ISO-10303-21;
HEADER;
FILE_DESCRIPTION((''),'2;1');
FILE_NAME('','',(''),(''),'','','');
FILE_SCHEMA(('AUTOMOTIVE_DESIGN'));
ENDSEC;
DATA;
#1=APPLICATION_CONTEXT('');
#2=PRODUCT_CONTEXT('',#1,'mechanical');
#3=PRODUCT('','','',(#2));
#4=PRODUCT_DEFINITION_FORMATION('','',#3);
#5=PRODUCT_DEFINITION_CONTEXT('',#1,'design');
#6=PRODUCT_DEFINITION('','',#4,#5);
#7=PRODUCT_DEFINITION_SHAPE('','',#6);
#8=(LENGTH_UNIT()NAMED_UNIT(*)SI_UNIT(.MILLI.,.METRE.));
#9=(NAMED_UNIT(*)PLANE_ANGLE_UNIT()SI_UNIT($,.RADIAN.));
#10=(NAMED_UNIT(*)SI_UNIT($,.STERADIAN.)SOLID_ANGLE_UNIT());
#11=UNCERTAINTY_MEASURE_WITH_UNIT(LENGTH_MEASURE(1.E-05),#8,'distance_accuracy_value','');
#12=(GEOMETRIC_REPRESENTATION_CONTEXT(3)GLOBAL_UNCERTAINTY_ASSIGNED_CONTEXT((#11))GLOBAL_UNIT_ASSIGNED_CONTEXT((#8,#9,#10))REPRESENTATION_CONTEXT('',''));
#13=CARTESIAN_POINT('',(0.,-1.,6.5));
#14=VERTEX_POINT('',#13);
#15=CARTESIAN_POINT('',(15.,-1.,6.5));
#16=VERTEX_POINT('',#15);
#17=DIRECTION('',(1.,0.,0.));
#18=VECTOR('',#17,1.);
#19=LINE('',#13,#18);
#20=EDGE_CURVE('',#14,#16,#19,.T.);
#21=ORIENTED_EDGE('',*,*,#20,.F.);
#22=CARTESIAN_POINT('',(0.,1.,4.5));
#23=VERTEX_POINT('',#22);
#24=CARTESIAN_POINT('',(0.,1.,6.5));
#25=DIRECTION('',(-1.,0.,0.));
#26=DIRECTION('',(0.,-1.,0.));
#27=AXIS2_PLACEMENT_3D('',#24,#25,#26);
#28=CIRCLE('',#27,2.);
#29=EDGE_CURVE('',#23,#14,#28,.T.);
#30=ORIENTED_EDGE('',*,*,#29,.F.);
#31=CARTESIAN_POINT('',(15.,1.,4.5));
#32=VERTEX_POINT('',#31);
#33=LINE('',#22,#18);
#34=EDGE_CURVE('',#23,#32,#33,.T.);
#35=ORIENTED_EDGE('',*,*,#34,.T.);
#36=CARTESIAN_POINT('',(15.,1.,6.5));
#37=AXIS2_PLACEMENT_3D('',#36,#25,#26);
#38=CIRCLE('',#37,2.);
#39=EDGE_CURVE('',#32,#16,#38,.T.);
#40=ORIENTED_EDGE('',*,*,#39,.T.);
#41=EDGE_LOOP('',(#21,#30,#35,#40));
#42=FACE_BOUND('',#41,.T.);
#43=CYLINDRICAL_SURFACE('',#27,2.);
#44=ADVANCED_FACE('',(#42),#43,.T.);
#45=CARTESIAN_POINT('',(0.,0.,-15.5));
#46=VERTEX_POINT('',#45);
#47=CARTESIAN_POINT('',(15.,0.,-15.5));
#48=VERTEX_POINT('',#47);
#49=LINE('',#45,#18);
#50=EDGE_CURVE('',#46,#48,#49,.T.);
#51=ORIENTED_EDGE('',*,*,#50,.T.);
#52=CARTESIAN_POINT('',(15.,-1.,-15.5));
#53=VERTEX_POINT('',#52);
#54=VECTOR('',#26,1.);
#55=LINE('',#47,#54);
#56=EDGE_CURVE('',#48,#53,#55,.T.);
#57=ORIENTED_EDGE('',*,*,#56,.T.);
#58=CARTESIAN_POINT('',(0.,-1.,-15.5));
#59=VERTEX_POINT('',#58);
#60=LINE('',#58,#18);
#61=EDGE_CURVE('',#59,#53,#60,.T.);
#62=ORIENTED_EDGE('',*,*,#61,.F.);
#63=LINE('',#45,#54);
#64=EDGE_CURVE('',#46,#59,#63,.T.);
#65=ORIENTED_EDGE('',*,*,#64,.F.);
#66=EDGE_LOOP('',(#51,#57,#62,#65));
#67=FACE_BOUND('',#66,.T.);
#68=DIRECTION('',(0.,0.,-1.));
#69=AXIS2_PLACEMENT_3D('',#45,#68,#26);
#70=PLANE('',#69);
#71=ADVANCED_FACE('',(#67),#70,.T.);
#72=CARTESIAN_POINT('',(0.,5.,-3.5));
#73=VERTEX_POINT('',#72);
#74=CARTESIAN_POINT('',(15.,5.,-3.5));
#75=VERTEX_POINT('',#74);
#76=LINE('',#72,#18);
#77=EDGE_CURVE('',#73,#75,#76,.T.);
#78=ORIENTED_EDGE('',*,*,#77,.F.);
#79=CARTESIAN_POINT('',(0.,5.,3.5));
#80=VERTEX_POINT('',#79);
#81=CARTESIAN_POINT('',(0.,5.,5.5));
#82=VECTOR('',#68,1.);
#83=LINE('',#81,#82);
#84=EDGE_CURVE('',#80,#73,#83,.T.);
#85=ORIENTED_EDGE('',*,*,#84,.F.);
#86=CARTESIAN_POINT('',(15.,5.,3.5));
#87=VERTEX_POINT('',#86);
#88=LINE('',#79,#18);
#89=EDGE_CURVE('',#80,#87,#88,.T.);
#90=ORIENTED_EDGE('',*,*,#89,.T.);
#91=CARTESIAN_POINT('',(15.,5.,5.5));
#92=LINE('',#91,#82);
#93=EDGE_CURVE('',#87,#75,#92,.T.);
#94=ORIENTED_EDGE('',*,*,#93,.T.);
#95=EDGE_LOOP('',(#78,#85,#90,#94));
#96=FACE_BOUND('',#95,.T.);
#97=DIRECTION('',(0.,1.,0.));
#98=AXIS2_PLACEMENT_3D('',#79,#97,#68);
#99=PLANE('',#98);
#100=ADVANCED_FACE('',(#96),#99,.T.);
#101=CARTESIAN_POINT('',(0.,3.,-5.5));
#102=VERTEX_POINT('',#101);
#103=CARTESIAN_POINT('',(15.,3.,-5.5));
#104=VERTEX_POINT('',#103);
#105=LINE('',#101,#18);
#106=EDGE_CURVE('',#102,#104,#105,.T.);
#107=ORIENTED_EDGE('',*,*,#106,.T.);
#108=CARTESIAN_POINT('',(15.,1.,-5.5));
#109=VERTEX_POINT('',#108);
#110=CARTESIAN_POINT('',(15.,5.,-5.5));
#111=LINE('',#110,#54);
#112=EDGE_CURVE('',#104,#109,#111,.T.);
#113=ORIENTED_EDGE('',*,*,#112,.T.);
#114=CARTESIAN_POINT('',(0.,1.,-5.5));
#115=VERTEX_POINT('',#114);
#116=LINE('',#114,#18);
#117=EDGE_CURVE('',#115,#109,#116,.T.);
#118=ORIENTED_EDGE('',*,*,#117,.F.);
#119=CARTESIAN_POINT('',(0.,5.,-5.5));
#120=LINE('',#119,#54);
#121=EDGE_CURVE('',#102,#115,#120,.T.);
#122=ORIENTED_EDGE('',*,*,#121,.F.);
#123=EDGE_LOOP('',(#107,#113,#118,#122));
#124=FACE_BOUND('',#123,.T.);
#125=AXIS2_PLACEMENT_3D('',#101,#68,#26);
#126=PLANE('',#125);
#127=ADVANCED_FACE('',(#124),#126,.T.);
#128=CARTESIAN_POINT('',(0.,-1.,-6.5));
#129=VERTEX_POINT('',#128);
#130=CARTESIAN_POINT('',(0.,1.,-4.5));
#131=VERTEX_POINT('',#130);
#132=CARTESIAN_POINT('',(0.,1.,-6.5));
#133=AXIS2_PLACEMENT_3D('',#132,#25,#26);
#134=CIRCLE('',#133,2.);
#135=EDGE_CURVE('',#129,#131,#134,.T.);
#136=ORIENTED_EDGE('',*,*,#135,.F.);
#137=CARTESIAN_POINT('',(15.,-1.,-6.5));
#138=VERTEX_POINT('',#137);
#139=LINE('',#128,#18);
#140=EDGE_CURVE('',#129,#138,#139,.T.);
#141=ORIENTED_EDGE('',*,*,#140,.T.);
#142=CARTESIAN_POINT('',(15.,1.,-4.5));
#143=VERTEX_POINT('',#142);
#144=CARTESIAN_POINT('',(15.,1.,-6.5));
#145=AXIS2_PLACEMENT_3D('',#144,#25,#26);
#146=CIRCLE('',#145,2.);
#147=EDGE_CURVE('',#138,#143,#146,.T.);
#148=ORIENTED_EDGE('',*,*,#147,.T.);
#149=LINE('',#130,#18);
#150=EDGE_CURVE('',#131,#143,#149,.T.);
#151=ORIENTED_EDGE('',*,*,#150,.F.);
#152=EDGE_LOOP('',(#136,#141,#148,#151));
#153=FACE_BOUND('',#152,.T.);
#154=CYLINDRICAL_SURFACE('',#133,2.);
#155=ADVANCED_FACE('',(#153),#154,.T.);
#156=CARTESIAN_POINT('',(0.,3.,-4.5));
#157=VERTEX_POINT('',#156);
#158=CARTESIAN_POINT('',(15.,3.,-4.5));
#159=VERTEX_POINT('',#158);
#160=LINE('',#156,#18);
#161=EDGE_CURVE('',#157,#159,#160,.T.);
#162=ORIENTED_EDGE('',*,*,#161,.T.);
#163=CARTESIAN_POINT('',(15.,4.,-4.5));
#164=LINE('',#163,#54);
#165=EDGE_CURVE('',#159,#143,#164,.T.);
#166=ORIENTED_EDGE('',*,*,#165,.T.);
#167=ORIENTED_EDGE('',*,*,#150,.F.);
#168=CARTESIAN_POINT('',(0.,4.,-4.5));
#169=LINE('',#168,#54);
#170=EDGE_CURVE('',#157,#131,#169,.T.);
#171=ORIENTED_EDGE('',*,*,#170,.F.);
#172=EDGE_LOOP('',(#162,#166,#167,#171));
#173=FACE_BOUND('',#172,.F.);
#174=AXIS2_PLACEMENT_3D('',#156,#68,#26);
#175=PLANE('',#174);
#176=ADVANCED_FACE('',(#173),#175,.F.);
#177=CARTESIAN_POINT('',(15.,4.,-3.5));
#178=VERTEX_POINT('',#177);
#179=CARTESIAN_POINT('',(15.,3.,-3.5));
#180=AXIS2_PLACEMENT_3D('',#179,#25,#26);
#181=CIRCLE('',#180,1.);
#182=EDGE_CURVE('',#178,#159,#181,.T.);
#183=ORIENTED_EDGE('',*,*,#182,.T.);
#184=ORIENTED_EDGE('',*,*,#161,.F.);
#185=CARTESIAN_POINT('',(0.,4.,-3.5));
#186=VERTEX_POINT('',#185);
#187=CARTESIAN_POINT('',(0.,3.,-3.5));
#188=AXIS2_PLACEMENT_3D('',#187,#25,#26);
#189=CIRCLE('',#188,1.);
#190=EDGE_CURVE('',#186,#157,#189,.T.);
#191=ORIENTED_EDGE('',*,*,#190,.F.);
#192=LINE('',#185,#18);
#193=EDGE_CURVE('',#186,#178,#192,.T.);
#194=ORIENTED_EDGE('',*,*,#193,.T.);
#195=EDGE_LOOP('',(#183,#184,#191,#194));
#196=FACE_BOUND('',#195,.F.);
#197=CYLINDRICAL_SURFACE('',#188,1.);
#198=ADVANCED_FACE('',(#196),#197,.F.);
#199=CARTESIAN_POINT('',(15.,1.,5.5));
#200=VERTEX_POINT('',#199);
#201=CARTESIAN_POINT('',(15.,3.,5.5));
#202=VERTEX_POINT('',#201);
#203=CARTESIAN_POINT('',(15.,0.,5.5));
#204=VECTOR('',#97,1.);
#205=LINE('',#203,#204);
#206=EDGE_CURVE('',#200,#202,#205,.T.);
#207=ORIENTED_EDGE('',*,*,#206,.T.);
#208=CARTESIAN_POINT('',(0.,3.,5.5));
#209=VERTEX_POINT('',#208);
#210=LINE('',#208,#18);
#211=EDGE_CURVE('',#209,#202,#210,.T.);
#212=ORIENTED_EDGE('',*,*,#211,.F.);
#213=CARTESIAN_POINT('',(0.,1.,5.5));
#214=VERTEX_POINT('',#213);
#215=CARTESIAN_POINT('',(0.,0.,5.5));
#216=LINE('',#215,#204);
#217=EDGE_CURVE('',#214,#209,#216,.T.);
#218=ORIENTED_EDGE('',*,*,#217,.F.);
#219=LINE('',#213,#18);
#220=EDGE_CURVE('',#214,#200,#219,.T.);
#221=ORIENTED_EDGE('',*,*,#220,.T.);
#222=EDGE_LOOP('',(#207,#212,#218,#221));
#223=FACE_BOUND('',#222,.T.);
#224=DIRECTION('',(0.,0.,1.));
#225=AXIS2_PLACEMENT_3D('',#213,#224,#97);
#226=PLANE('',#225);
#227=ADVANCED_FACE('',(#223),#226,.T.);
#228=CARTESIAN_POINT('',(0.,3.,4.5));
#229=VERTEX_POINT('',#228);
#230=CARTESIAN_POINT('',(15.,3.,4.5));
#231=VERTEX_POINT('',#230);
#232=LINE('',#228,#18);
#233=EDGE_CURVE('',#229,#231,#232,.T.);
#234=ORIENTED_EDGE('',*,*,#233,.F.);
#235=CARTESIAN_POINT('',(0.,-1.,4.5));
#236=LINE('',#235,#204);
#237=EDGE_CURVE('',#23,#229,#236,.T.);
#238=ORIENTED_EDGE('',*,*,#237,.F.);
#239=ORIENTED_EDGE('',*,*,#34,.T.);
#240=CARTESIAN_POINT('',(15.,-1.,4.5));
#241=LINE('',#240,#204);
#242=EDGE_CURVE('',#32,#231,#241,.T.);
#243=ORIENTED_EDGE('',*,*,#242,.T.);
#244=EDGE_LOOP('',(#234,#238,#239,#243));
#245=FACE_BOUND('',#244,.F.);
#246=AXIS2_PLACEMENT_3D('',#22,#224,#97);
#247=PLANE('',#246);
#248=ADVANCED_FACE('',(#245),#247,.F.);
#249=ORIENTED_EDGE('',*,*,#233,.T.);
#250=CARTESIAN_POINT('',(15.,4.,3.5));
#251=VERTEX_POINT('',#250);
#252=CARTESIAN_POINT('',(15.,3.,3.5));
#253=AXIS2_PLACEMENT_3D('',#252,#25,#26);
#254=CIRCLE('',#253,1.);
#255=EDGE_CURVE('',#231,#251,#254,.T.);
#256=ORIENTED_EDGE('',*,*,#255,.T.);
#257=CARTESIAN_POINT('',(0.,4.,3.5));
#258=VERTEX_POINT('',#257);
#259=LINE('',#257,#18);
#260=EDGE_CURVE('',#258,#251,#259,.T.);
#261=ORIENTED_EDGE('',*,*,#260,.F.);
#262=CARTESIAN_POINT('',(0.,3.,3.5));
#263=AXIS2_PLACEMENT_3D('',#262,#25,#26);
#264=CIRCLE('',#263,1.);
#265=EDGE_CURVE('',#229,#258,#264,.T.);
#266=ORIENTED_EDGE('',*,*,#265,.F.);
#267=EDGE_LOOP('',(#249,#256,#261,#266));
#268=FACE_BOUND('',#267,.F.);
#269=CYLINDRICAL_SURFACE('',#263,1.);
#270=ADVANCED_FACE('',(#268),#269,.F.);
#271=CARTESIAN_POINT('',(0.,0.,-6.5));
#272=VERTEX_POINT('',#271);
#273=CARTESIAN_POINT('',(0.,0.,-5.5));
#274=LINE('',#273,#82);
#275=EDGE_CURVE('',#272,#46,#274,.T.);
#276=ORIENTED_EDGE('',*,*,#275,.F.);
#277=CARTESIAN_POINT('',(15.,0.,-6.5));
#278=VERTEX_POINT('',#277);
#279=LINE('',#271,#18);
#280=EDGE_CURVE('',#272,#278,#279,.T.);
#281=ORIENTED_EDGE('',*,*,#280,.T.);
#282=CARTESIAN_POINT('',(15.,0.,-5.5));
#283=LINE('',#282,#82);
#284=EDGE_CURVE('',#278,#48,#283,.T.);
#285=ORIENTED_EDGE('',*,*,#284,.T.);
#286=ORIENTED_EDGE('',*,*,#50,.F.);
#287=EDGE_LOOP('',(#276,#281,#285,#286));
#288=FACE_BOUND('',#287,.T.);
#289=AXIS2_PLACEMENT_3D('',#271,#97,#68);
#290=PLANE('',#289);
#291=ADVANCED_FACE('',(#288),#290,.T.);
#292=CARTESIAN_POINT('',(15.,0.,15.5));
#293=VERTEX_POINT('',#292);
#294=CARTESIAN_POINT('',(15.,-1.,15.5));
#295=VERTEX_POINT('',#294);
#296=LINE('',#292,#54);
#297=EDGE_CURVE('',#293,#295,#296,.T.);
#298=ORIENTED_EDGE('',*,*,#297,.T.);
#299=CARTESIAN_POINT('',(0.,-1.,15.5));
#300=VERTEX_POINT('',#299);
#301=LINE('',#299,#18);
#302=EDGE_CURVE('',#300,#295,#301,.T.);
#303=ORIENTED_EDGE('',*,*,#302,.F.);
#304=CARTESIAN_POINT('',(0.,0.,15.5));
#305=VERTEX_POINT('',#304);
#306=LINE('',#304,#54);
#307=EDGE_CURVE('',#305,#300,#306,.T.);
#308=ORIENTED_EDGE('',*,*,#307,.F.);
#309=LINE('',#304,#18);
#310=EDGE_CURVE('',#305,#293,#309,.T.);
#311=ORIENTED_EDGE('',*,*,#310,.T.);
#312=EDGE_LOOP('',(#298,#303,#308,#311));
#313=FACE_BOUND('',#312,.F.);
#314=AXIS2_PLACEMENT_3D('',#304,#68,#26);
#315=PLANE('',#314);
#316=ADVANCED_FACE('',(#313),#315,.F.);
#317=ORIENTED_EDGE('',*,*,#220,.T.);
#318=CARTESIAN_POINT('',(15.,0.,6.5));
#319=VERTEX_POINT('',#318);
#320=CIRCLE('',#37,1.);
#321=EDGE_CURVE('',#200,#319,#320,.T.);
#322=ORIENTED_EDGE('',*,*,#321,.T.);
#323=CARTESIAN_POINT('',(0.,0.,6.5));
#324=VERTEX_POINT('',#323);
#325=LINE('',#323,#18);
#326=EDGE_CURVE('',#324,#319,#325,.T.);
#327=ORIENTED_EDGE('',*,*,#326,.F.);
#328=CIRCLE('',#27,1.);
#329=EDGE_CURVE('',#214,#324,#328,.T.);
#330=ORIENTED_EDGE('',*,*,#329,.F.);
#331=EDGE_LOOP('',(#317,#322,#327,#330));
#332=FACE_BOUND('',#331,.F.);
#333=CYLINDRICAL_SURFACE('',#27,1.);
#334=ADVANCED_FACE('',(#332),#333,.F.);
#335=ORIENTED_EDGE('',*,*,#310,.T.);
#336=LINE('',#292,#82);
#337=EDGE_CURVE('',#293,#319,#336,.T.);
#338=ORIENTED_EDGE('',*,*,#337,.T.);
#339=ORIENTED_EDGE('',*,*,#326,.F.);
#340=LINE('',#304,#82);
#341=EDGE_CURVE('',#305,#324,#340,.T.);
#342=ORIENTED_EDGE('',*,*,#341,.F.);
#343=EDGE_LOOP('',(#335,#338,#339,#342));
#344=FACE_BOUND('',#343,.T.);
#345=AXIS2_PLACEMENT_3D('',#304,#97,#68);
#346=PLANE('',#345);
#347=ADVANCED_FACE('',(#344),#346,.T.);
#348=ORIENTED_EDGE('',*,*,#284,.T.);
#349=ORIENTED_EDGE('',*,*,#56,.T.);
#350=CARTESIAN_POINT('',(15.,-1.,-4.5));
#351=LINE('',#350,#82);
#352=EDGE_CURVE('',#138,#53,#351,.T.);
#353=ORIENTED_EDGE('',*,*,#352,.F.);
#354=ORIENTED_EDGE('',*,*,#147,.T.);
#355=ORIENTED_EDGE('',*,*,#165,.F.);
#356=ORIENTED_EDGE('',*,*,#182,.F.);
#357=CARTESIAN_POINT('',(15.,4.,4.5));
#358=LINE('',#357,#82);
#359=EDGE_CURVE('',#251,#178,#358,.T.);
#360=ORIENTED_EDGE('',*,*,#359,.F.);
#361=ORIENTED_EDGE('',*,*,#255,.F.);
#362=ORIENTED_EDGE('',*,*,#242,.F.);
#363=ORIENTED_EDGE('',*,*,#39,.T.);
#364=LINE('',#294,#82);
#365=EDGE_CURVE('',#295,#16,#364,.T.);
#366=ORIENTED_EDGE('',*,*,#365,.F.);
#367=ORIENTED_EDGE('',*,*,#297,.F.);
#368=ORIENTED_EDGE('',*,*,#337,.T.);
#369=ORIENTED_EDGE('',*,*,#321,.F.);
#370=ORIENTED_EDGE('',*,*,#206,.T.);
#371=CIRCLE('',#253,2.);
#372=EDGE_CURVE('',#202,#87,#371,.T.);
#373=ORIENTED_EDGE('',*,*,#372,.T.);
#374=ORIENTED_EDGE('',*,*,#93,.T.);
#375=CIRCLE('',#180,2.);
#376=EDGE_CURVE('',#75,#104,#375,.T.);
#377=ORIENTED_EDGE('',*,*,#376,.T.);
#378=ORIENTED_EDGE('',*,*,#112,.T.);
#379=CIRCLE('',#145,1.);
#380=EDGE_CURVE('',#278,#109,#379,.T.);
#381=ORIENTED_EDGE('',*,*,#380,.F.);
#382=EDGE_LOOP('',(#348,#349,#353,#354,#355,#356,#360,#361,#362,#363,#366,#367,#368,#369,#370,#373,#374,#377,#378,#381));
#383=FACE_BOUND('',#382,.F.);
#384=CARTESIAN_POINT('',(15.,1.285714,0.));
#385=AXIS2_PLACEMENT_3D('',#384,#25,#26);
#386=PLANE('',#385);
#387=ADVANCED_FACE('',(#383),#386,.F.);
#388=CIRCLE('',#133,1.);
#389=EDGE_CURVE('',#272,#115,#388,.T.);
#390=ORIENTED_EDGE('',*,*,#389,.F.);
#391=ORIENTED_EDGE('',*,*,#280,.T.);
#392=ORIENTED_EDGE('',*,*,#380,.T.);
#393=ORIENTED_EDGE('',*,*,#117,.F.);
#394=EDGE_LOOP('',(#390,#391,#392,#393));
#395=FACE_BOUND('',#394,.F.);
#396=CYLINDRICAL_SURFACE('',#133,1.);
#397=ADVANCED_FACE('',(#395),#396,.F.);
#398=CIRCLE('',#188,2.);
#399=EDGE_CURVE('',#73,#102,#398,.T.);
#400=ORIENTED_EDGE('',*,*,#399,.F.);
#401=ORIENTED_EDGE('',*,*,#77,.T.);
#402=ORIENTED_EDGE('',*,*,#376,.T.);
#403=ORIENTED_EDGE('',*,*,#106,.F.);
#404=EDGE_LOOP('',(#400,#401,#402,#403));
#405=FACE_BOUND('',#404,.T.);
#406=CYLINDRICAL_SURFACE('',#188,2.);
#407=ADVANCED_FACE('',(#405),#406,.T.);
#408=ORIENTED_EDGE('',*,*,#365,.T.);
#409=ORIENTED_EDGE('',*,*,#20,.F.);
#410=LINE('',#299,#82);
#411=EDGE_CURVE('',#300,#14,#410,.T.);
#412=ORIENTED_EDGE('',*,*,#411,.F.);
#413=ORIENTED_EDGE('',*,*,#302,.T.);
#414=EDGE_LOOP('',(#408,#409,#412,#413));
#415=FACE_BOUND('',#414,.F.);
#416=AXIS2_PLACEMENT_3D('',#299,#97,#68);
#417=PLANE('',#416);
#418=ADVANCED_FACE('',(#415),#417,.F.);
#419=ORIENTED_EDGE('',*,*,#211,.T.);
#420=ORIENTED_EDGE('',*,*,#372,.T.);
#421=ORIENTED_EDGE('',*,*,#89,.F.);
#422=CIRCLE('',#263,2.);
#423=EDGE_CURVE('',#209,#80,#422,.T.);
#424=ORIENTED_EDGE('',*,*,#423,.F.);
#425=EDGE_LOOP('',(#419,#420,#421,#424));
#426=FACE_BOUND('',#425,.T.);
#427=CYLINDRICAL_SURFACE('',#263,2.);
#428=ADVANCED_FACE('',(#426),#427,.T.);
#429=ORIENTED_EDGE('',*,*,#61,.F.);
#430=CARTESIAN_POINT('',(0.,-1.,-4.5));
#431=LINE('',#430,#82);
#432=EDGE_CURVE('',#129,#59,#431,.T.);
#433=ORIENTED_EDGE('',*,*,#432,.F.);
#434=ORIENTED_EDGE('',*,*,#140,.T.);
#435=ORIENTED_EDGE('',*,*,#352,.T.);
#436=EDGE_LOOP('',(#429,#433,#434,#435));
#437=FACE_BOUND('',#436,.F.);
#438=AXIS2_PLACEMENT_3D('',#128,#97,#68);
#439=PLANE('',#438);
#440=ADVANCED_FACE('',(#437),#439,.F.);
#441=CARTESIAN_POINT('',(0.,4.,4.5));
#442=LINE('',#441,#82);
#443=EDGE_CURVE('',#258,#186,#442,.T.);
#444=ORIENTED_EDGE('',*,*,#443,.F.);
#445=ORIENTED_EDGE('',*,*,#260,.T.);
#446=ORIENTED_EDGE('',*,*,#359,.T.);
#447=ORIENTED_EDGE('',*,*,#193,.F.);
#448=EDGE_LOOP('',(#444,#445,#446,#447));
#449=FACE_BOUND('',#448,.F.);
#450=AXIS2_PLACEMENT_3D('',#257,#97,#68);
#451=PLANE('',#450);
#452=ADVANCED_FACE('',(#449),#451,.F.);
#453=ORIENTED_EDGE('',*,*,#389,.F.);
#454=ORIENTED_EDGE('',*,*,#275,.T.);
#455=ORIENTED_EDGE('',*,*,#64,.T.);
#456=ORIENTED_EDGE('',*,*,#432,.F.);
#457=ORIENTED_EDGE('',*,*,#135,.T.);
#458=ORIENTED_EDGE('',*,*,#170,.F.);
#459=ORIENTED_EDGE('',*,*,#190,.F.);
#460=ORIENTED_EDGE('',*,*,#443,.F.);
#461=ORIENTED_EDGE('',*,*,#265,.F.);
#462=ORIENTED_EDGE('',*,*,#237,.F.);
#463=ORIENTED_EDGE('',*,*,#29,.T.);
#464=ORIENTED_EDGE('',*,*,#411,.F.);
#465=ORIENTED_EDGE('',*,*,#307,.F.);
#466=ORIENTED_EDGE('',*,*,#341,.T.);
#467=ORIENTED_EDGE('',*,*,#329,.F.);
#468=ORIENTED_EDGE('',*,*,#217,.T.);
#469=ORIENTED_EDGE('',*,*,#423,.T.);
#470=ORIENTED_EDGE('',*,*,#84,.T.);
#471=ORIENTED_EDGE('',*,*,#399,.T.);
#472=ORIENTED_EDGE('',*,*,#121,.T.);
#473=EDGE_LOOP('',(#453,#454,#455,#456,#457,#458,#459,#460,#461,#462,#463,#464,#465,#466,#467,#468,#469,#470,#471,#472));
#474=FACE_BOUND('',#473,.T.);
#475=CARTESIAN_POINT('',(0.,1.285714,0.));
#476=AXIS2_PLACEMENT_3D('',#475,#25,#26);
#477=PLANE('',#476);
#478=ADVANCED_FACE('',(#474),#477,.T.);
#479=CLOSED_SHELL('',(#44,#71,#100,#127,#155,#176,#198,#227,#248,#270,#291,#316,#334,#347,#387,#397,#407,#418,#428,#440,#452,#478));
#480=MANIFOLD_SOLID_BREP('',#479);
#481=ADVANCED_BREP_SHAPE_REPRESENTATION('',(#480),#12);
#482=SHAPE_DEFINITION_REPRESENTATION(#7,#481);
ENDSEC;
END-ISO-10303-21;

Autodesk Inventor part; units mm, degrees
ref_plane "YZ Plane" through (0, 0, 0) normal (1, 0, 0) x (0, 1, 0)
ref_plane "XZ Plane" through (0, 0, 0) normal (0, 1, 0) x (-1, 0, 0)
ref_plane "XY Plane" through (0, 0, 0) normal (0, 0, 1) x (1, 0, 0)
sketch "Sketch8" plane through (0, 0, 0) normal (1, 0, 0) x (0, 1, 0)
  line L0 (0, 15.5) -> (0, 5.5)
  line L1 (0, 5.5) -> (5, 5.5)
  line L2 (5, 5.5) -> (5, -5.5)
  line L3 (5, -5.5) -> (0, -5.5)
  line L4 (0, -5.5) -> (0, -15.5)
  point P0 (0, 0)
  point P1 (5, 0)
  dimension "d39" = 11
  dimension "d40" = 5
  dimension "d41" = 10
  dimension "d42" = 10
contour flange "Contour Flange1" sketch "Sketch8" thickness 1 bend radius 1 width 15 along (1, 0, 0) mid plane no both sides no wall seen from (0, 0, 10.5) lies toward (0, -1, 0) curves L0 L1 L2 L3 L4
bend "Bend1"
corner "Corner1"
equation "\"d29\" = BendReliefWidth"
equation "\"d30\" = BendReliefDepth"
equation "\"d31\" = MinimumRemnant"
equation "\"d32\" = BendRadius"
equation "\"d34\" = BendRadius"
equation "\"d36\" = CornerReliefSize"
equation "\"d37\" = GapSize"
equation "\"d38\" = JacobiRadiusSize"
equation "\"BendRadius\" = Thickness"
equation "\"BendReliefWidth\" = Thickness"
equation "\"BendReliefDepth\" = 0.5 * Thickness"
equation "\"CornerReliefSize\" = 4 * Thickness"
equation "\"MinimumRemnant\" = 2 * Thickness"
equation "\"TransitionRadius\" = BendRadius"
equation "\"JacobiRadiusSize\" = Thickness"
equation "\"GapSize\" = Thickness"
equation "\"d23\" = BendRadius"
equation "\"Thickness\" = 1"
properties part number "M18 - Aluminum Bracket" material "Aluminum 6061"
